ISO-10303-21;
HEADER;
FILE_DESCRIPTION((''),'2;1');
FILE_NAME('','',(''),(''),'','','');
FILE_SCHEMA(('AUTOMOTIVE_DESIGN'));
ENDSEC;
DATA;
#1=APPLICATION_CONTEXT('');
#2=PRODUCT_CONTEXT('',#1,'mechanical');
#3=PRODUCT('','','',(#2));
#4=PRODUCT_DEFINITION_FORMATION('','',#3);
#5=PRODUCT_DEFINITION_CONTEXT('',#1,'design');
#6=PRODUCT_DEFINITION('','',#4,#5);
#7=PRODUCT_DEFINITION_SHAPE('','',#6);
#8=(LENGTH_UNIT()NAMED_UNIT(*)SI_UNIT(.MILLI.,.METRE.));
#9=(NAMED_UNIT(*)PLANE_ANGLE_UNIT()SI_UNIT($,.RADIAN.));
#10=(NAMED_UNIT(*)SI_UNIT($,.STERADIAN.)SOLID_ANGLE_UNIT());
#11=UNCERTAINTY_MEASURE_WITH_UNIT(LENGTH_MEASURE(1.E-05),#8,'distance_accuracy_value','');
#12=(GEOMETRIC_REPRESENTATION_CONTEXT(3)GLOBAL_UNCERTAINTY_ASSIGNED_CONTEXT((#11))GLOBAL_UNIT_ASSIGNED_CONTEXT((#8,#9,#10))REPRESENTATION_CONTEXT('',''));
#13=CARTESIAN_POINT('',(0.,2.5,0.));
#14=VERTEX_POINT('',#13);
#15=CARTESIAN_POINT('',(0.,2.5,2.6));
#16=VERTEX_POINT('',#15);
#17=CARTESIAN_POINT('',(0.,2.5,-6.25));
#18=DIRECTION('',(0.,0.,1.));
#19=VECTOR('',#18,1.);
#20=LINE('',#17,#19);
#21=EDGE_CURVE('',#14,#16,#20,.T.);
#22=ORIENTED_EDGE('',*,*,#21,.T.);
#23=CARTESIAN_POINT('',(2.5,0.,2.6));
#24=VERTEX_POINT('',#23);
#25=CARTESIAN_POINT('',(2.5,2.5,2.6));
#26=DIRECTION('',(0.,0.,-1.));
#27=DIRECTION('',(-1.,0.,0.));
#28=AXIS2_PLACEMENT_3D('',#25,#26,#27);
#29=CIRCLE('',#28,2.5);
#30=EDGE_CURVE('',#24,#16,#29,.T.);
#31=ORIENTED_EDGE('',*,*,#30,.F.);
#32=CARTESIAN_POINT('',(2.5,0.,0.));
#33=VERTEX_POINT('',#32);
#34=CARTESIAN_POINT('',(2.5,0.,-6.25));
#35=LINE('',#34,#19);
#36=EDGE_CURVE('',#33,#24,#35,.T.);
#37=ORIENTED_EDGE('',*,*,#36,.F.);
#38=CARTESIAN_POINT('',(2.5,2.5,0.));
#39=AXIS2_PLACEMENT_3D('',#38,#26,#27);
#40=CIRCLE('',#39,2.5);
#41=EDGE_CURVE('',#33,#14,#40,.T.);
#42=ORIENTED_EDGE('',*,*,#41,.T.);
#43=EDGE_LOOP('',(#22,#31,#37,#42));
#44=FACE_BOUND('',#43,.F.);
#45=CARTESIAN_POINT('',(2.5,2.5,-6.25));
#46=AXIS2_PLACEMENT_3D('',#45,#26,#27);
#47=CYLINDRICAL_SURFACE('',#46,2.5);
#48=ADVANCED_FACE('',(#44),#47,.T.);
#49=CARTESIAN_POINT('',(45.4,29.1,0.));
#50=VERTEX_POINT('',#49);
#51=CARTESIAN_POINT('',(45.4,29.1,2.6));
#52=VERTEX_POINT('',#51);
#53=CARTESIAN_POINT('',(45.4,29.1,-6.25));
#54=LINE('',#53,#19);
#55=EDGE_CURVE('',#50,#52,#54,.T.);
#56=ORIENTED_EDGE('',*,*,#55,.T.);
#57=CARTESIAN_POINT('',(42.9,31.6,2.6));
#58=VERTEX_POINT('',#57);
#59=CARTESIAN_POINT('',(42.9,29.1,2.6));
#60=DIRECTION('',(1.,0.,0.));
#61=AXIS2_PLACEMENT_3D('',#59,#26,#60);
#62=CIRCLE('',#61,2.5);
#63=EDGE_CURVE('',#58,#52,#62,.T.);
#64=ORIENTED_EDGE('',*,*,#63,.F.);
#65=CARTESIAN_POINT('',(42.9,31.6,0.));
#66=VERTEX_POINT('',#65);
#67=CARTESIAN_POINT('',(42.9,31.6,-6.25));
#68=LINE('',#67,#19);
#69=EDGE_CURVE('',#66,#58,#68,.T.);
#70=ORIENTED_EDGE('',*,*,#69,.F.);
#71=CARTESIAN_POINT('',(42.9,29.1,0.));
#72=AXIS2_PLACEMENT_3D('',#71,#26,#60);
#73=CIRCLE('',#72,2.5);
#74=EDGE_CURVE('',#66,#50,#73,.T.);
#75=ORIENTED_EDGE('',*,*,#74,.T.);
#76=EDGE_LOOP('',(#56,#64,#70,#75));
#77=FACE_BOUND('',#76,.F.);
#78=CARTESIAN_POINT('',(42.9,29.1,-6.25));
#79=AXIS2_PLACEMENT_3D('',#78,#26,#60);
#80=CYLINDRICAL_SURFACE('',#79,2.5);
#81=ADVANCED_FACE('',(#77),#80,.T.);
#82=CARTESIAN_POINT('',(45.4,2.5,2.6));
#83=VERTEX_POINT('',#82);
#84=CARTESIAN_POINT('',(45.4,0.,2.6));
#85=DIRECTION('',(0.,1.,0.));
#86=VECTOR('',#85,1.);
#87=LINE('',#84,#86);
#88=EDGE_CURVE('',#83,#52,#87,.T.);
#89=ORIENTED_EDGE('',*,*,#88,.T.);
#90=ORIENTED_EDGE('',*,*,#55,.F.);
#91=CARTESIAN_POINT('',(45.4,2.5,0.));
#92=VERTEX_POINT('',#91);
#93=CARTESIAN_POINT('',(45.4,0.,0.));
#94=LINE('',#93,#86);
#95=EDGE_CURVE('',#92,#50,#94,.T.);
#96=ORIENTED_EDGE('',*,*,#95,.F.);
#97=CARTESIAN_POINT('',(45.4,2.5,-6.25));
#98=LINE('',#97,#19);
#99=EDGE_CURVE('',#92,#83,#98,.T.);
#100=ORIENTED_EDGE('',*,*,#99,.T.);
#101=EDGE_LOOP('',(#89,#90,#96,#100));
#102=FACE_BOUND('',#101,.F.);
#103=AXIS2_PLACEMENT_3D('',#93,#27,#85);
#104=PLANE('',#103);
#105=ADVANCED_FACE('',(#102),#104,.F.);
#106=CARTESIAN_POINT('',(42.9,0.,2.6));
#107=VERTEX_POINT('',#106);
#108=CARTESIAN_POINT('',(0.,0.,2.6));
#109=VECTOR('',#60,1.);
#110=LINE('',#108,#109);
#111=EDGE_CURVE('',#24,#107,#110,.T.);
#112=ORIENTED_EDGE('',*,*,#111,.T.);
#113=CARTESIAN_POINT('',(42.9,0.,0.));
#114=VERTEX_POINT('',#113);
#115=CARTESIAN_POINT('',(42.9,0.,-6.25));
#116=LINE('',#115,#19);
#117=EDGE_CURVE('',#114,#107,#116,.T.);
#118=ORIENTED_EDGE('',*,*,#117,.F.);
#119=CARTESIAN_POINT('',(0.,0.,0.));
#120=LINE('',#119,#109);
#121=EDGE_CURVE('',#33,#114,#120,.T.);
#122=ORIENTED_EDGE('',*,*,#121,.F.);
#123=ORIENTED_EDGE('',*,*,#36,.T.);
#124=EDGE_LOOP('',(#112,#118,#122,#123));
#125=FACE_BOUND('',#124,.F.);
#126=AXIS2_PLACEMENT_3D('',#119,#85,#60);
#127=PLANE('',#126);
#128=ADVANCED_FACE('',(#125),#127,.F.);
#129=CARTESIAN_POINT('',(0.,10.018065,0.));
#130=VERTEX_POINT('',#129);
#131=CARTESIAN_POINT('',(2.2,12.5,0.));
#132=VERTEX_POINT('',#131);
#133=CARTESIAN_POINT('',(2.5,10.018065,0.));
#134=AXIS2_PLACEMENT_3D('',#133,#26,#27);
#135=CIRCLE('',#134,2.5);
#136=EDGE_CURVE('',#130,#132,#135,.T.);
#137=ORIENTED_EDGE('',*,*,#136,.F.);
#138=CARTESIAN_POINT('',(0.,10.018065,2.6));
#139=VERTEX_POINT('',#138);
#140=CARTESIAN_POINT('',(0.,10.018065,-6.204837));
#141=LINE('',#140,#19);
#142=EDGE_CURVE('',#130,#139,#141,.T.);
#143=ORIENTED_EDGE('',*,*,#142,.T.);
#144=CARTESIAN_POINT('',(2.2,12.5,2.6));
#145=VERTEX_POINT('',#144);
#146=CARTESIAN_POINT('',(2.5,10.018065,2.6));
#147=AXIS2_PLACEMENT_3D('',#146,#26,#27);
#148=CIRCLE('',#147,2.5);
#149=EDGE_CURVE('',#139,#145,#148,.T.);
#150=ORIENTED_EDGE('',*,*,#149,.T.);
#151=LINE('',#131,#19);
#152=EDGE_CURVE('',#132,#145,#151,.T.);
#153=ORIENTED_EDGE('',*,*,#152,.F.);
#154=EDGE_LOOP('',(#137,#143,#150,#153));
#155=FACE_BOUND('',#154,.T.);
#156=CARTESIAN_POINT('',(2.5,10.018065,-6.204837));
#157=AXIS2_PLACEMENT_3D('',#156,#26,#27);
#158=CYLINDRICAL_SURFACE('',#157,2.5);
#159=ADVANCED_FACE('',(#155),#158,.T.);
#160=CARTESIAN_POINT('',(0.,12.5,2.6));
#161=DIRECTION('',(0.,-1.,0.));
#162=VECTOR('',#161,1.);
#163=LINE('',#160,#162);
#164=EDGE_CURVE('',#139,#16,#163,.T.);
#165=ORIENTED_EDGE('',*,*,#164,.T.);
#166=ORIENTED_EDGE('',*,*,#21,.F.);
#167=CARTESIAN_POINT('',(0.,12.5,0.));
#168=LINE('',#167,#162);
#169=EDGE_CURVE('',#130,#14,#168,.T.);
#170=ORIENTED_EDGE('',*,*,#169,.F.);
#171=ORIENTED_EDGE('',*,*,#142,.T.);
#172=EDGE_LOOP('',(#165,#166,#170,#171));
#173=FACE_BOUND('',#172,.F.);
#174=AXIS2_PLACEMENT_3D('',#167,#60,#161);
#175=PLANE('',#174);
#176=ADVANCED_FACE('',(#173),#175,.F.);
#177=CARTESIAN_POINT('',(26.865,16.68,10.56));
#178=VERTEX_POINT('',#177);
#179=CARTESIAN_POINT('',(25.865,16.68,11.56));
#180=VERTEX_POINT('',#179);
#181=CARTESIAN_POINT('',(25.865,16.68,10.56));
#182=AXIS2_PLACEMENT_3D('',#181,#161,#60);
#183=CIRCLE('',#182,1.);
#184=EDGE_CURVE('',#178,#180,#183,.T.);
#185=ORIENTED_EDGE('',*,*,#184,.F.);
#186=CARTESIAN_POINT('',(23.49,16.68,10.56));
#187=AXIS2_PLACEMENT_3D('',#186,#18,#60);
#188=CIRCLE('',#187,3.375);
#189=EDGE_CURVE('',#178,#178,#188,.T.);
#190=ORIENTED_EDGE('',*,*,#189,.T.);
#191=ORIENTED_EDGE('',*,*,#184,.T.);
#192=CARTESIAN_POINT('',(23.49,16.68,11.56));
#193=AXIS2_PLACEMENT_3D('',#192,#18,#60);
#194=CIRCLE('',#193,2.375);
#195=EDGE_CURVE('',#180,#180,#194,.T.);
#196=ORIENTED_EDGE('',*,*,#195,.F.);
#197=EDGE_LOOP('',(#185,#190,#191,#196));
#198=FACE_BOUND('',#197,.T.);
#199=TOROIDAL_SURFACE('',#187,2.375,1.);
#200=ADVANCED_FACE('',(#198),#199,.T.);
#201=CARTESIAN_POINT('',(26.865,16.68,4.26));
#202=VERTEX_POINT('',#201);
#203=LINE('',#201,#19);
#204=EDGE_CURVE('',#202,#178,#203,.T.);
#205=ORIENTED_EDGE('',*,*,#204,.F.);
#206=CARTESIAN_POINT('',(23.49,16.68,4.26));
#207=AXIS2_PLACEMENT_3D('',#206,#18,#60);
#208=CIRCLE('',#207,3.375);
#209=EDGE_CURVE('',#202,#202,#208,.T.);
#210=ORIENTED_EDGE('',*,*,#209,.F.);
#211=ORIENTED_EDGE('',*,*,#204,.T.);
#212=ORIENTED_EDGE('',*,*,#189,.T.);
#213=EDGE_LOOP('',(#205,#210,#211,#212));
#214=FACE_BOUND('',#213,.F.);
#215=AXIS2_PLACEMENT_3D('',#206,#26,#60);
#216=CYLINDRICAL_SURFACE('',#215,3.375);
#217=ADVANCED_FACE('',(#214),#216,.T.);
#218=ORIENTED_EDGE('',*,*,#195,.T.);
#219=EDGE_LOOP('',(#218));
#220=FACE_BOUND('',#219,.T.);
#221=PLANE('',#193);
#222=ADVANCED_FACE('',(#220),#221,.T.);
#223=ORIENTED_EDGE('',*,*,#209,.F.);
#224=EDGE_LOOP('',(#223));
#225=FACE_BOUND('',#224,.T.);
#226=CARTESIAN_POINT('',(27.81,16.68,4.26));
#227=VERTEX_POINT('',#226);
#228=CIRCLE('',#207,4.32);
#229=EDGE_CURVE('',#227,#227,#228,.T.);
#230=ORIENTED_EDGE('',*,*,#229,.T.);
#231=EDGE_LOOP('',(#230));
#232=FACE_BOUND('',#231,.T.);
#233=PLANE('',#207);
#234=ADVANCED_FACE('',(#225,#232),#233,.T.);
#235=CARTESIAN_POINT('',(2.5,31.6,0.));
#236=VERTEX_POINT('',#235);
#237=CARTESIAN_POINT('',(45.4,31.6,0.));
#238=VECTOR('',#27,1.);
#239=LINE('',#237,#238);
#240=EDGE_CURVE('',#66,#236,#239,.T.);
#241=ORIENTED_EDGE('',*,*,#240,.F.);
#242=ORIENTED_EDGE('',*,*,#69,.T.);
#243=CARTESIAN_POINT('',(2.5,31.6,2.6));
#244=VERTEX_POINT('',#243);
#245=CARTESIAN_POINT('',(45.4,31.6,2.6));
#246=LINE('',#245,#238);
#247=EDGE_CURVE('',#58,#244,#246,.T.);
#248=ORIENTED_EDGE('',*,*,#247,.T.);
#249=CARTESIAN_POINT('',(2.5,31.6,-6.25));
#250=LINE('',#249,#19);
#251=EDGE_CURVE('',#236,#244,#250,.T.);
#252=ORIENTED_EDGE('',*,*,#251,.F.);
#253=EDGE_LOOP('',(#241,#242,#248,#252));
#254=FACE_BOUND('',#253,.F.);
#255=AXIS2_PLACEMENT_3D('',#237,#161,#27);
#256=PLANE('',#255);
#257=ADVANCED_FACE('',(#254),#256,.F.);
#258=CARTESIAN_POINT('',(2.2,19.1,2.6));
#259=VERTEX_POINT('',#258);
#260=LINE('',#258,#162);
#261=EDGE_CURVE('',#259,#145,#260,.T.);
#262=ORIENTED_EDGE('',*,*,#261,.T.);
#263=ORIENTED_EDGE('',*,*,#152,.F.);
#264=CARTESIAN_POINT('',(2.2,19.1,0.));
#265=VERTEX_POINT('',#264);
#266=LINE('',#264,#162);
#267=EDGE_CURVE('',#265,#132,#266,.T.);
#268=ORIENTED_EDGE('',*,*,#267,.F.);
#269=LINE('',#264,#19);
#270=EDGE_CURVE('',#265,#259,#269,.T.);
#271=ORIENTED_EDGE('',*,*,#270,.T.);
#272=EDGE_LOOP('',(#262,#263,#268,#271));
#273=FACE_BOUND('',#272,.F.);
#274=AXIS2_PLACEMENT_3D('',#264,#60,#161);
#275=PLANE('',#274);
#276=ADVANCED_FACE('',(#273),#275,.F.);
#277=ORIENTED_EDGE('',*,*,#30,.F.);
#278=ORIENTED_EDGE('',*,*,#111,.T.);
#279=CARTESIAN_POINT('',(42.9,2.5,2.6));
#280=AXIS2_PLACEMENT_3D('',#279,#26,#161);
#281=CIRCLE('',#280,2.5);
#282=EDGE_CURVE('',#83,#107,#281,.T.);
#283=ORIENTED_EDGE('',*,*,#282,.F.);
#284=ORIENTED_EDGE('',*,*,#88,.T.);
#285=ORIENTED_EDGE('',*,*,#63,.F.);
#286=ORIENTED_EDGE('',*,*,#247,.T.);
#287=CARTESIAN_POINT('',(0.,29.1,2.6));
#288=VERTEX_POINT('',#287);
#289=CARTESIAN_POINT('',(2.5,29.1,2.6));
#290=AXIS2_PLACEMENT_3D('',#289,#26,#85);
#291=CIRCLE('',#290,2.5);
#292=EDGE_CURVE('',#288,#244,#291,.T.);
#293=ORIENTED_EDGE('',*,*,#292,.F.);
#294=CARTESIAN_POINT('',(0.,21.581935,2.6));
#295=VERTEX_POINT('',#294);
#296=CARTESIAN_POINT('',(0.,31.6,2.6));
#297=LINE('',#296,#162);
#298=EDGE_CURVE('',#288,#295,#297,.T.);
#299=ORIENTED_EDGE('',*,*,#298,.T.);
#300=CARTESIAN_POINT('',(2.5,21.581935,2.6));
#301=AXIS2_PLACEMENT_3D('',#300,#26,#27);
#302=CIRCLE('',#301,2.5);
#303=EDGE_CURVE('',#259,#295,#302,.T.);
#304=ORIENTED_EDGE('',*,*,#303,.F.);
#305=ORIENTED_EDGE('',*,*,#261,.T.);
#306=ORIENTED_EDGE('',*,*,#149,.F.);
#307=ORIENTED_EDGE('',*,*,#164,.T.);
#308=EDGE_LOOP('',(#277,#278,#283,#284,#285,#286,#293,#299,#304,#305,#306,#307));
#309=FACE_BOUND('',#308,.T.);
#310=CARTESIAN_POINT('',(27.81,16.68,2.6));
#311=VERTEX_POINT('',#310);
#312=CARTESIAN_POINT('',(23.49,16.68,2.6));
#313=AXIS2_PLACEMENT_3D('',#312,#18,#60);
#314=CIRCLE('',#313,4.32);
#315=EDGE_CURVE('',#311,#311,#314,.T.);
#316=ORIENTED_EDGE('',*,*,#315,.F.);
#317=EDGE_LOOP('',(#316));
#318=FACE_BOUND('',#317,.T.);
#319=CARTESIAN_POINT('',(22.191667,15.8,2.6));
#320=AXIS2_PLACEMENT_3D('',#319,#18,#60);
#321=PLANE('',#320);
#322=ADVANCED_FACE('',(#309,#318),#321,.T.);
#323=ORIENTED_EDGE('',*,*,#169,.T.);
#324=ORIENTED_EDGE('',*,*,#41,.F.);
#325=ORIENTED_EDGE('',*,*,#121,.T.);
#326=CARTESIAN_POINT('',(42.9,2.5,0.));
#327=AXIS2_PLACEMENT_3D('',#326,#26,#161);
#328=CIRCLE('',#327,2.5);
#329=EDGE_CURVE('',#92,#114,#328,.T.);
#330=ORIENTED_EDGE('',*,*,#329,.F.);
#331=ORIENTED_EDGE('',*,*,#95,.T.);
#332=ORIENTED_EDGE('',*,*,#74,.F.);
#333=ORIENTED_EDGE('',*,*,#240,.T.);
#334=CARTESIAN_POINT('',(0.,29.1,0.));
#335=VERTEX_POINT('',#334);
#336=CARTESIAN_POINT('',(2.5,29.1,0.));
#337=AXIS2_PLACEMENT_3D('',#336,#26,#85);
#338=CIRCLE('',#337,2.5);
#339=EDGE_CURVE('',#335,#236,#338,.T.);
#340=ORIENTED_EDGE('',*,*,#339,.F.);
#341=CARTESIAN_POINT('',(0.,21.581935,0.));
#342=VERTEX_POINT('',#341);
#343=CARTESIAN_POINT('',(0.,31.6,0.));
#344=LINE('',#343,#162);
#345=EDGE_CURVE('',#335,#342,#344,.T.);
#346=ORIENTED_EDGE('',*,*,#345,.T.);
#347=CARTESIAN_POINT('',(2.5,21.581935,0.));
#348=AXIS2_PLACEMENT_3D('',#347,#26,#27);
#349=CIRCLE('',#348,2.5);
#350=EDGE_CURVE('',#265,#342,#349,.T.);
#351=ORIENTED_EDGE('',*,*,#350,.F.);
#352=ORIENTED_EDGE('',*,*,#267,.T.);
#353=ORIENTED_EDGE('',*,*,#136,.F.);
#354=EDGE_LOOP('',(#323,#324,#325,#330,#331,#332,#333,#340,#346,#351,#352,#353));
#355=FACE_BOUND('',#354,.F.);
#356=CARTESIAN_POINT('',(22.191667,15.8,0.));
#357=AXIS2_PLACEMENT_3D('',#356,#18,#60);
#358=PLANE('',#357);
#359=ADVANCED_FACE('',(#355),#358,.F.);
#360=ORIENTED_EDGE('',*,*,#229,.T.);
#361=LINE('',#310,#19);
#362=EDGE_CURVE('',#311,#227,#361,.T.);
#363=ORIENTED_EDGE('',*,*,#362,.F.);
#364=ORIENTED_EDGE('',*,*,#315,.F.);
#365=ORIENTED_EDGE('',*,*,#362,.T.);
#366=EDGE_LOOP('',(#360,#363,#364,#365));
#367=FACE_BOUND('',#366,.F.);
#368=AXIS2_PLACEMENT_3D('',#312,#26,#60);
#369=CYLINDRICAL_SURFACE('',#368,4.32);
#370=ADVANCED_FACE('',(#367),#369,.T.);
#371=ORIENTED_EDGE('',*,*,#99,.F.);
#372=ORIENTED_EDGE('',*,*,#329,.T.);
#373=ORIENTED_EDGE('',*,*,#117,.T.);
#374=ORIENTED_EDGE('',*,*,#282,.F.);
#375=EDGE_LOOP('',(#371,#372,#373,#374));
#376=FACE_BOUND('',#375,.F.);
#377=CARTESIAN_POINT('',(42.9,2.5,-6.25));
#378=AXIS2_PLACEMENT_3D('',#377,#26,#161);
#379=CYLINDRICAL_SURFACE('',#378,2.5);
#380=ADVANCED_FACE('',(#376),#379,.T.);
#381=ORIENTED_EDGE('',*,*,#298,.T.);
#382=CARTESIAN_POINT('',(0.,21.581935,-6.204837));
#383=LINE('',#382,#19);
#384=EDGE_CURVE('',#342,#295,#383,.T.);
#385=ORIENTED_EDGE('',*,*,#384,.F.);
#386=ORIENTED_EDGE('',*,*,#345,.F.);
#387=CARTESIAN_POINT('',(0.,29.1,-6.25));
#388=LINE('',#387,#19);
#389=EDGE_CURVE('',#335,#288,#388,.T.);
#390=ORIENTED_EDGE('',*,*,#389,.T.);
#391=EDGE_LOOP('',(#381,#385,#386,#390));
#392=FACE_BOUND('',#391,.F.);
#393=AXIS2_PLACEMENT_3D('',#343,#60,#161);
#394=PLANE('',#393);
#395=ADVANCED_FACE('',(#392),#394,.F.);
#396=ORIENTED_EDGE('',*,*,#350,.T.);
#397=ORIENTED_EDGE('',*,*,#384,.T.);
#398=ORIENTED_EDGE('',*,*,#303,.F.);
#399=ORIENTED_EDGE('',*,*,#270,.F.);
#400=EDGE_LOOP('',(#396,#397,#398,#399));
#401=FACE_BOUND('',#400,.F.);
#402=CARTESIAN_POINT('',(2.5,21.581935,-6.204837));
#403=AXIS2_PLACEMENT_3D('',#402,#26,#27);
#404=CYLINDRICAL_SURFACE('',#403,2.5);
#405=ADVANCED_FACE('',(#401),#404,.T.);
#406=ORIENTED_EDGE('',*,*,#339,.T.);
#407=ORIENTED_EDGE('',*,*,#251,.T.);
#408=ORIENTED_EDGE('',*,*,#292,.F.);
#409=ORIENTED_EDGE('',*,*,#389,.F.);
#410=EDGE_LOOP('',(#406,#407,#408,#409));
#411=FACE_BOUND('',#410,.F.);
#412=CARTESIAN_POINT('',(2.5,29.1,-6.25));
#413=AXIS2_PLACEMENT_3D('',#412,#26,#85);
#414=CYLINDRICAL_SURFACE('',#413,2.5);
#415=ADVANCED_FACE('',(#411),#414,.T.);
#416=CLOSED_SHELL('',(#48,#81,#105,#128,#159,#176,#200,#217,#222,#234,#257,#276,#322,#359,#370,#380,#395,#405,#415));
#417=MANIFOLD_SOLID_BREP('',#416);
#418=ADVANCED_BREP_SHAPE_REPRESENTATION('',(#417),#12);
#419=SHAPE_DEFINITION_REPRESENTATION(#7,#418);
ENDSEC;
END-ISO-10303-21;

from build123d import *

# Parameters (mm, degrees)
F1_DEPTH    = 2.6
F2_T1_DEPTH = 15.1
F2_T3_DEPTH = 15.009673646
F3_R        = 4.32
F4_DEPTH    = 1.66
F5_R        = 3.375
F6_DEPTH    = 7.3
F7_R        = 1


# Not quite as in the source:
# - a fillet or chamfer that OpenCascade refuses, or shapes differently, is made with other operations: its cross-section is extruded or revolved along the edge and cut away or added


with BuildPart() as f1:
    # F0 (on Top) → F1 (new body)
    with BuildSketch(Plane.XY):
        Polygon((0, 12.5), (0, 0), (45.4, 0), (45.4, 31.6), (0, 31.6), (0, 19.1), (2.2, 19.1), (2.2, 12.5), align=None)
    extrude(amount=F1_DEPTH)

    # F2: fillet of radius 2.5 on 6 edges, made by hand

    # F2_s2 → F2_t1 (cut)
    with BuildSketch(Plane.XY.offset(-6.25)):
        with BuildLine():
            ThreePointArc((45.4, 29.1), (44.667766953, 30.867766953), (42.9, 31.6))
            Line((42.9, 31.6), (45.4, 31.6))
            Line((45.4, 31.6), (45.4, 29.1))
        make_face()
        with BuildLine():
            ThreePointArc((2.5, 31.6), (0.732233047, 30.867766953), (0, 29.1))
            Line((0, 29.1), (0, 31.6))
            Line((0, 31.6), (2.5, 31.6))
        make_face()
        with BuildLine():
            ThreePointArc((42.9, 0), (44.667766953, 0.732233047), (45.4, 2.5))
            Line((45.4, 2.5), (45.4, 0))
            Line((45.4, 0), (42.9, 0))
        make_face()
        with BuildLine():
            ThreePointArc((0, 2.5), (0.732233047, 0.732233047), (2.5, 0))
            Line((2.5, 0), (0, 0))
            Line((0, 0), (0, 2.5))
        make_face()
    extrude(amount=F2_T1_DEPTH, mode=Mode.SUBTRACT)

    # F2_s4 → F2_t3 (cut)
    with BuildSketch(Plane.XY.offset(-6.204836823)):
        with BuildLine():
            ThreePointArc((0, 21.5819347292), (0.6291713066, 19.923622334), (2.2, 19.1))
            Line((2.2, 19.1), (0, 19.1))
            Line((0, 19.1), (0, 21.5819347292))
        make_face()
        with BuildLine():
            ThreePointArc((0, 10.0180652708), (0.6291713066, 11.676377666), (2.2, 12.5))
            Line((2.2, 12.5), (0, 12.5))
            Line((0, 12.5), (0, 10.0180652708))
        make_face()
    extrude(amount=F2_T3_DEPTH, mode=Mode.SUBTRACT)

    # F3 (on face) → F4 (join)
    with BuildSketch(Plane.XY.offset(2.6)):
        with Locations((23.49, 16.68)):
            Circle(F3_R)
    extrude(amount=F4_DEPTH)

    # F5 (on face) → F6 (join)
    with BuildSketch(Plane.XY.offset(4.26)):
        with Locations((23.49, 16.68)):
            Circle(F5_R)
    extrude(amount=F6_DEPTH)

    # F7
    f7_edges = [f1.edges().sort_by_distance(p)[0] for p in [
        (20.115, 16.68, 11.56),
    ]]
    fillet(f7_edges, radius=F7_R)


solid = f1.part
